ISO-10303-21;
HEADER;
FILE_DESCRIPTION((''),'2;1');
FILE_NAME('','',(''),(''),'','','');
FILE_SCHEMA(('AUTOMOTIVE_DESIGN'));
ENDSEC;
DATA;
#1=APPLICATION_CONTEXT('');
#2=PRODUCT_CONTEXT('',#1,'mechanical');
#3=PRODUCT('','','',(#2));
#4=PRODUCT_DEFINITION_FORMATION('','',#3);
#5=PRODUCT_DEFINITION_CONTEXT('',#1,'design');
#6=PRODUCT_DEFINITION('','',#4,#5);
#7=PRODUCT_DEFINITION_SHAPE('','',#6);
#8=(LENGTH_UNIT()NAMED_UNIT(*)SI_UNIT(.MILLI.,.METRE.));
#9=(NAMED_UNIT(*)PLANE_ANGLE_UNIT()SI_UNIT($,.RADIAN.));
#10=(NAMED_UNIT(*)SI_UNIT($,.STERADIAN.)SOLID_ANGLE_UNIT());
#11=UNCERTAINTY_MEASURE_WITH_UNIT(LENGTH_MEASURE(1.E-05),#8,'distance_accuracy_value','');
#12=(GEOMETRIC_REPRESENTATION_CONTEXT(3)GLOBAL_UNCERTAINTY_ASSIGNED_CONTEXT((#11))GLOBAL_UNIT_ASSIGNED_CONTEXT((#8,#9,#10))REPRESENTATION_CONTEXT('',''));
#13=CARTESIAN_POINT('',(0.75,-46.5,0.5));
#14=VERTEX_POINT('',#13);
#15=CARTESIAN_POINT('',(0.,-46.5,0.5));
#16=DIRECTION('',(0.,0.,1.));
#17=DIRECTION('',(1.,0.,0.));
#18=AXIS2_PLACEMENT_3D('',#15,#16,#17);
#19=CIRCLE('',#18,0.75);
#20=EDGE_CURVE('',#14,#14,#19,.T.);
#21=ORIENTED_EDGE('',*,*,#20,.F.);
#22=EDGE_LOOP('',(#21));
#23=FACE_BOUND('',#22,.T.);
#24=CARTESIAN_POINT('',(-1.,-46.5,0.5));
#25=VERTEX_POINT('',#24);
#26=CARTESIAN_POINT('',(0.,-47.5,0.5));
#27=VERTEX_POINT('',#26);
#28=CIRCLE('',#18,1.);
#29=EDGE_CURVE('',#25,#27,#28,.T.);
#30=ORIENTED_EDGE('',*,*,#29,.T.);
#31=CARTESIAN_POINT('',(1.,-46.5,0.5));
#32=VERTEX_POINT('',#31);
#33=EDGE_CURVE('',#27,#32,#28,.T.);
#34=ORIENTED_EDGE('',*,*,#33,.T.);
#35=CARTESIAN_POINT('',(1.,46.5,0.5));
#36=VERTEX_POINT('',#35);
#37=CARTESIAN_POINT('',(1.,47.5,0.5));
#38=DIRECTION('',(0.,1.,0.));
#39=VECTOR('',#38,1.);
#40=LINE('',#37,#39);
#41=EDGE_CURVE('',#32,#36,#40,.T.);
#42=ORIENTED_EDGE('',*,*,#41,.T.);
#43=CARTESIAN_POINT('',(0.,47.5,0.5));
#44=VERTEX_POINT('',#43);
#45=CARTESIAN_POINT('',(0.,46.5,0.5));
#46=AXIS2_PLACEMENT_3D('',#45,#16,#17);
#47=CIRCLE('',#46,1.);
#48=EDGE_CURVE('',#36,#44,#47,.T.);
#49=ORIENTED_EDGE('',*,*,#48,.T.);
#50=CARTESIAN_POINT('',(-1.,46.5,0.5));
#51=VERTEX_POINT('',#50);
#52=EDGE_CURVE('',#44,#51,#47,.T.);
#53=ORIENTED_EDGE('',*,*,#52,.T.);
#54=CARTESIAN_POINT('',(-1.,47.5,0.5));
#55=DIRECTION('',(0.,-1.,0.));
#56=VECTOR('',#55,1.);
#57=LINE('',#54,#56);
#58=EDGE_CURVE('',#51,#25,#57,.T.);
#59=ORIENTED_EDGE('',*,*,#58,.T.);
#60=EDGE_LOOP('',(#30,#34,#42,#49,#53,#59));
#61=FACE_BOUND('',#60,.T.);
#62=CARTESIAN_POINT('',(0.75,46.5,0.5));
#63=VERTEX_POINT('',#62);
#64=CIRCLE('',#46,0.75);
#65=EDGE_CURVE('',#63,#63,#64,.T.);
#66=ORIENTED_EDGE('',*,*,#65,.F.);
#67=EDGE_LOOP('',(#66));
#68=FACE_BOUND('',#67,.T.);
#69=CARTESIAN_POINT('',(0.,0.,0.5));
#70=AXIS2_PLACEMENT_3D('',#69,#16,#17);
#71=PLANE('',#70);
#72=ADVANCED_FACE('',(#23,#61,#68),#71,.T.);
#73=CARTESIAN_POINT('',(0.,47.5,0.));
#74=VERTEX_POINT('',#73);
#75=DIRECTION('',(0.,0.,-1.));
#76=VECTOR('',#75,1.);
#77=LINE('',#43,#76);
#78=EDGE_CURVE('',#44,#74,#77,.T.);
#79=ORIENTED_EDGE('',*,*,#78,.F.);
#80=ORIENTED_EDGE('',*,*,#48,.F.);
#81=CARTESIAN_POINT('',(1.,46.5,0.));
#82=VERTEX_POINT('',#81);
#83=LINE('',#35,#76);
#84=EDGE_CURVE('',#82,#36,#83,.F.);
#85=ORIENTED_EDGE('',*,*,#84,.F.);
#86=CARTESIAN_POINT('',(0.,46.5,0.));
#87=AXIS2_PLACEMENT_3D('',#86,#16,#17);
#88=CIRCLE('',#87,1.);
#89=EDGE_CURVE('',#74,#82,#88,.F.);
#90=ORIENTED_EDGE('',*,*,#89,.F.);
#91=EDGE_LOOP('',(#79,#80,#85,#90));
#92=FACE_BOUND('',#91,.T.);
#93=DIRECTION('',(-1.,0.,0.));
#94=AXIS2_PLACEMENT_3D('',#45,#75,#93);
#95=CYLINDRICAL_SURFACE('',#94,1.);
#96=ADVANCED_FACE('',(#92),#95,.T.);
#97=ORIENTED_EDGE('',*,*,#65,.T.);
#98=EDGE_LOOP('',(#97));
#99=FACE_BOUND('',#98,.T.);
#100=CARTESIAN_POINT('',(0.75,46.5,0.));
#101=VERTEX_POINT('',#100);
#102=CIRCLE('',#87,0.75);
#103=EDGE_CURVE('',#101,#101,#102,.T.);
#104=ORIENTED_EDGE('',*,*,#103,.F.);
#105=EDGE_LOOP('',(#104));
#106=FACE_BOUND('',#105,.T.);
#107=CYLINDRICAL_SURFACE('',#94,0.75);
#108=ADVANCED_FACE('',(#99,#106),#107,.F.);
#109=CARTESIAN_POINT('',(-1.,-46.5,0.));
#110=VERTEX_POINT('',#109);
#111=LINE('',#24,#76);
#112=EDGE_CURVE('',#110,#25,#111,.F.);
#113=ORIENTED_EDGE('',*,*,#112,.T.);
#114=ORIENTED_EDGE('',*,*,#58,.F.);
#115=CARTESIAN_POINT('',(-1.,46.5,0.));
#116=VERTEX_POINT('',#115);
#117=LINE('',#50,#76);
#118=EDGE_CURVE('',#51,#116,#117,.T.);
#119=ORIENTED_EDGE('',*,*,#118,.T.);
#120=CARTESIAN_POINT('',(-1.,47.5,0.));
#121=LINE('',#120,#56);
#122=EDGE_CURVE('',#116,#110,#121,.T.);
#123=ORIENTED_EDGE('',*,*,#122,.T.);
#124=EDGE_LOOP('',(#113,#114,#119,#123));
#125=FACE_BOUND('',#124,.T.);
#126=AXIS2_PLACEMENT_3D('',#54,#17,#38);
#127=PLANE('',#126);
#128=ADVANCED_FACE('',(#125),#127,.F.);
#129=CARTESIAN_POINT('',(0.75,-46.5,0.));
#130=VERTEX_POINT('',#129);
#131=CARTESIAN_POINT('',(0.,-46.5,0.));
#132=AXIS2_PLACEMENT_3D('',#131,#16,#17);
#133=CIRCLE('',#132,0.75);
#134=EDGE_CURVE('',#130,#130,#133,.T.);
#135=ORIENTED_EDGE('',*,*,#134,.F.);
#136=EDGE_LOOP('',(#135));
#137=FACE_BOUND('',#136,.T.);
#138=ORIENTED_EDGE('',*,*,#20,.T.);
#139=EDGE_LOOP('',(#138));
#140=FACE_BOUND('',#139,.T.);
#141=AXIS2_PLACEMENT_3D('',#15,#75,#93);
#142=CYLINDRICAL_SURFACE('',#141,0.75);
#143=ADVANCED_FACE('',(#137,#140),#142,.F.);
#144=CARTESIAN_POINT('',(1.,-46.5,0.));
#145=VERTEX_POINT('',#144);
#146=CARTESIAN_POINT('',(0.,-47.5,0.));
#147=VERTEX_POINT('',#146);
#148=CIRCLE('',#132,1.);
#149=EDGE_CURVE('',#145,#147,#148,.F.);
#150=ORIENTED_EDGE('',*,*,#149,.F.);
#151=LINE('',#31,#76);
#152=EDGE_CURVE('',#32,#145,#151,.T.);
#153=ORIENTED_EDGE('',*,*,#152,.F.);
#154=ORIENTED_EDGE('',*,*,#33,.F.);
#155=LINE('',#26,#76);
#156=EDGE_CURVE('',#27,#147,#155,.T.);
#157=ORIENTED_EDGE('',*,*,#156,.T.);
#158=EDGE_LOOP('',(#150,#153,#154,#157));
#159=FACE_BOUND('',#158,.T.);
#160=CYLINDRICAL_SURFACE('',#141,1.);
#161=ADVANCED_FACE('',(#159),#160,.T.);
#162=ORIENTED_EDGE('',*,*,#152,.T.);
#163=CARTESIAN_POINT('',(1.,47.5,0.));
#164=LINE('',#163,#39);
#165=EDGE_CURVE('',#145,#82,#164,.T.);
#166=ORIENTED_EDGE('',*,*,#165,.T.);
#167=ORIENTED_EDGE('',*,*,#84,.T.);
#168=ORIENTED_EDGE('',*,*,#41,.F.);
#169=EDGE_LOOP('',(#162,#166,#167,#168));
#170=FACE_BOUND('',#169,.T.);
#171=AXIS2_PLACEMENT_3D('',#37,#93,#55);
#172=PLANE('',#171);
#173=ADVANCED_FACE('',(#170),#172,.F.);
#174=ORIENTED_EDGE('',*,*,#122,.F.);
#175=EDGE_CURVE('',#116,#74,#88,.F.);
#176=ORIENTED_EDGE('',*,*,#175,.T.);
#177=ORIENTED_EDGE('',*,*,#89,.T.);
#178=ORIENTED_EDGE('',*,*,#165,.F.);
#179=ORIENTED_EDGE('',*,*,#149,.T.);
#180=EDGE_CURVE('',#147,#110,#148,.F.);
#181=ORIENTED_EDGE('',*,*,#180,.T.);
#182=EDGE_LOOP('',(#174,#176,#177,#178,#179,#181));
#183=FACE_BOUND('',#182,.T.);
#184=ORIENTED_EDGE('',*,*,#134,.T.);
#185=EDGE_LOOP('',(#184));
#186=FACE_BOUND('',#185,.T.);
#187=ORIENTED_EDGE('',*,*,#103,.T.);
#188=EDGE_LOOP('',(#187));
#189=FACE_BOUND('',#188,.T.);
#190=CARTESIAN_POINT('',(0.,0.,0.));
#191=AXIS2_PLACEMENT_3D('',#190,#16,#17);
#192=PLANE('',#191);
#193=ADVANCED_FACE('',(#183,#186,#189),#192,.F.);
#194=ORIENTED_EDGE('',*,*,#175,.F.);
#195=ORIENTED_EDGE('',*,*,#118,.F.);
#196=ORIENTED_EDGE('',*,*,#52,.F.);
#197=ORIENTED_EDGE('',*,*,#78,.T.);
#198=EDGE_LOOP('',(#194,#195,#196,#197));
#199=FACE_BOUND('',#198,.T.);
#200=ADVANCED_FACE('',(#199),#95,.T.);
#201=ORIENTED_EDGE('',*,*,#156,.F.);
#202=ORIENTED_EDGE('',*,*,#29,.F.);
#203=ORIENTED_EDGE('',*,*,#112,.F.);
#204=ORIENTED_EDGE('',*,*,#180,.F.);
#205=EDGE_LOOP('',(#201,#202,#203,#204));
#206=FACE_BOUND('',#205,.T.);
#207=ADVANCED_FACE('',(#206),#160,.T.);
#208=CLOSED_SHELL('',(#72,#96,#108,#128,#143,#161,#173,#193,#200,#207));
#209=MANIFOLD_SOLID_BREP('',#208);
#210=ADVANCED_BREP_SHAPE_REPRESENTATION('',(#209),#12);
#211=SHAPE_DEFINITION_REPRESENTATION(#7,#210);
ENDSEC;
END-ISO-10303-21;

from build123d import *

# Parameters (mm, degrees)
SKETCH1_W           = 2
SKETCH1_H           = 95
SKETCH1_R           = 0.75
BOSS_EXTRUDE1_DEPTH = 0.5
FILLET1_R           = 1


with BuildPart() as part:
    # Sketch1 → Boss-Extrude1 (new body)
    with BuildSketch(Plane.XY):
        Rectangle(SKETCH1_W, SKETCH1_H)
        with Locations((0, -46.5)):
            Circle(SKETCH1_R, mode=Mode.SUBTRACT)
        with Locations((0, 46.5)):
            Circle(SKETCH1_R, mode=Mode.SUBTRACT)
    extrude(amount=BOSS_EXTRUDE1_DEPTH)

    # Fillet1
    fillet1_edges = [part.edges().sort_by_distance(p)[0] for p in [
        (1, -47.5, 0.25),
        (-1, -47.5, 0.25),
        (-1, 47.5, 0.25),
        (1, 47.5, 0.25),
    ]]
    fillet(fillet1_edges, radius=FILLET1_R - 0.0001)  # a hair under: the kernel refuses the full size


solid = part.part
